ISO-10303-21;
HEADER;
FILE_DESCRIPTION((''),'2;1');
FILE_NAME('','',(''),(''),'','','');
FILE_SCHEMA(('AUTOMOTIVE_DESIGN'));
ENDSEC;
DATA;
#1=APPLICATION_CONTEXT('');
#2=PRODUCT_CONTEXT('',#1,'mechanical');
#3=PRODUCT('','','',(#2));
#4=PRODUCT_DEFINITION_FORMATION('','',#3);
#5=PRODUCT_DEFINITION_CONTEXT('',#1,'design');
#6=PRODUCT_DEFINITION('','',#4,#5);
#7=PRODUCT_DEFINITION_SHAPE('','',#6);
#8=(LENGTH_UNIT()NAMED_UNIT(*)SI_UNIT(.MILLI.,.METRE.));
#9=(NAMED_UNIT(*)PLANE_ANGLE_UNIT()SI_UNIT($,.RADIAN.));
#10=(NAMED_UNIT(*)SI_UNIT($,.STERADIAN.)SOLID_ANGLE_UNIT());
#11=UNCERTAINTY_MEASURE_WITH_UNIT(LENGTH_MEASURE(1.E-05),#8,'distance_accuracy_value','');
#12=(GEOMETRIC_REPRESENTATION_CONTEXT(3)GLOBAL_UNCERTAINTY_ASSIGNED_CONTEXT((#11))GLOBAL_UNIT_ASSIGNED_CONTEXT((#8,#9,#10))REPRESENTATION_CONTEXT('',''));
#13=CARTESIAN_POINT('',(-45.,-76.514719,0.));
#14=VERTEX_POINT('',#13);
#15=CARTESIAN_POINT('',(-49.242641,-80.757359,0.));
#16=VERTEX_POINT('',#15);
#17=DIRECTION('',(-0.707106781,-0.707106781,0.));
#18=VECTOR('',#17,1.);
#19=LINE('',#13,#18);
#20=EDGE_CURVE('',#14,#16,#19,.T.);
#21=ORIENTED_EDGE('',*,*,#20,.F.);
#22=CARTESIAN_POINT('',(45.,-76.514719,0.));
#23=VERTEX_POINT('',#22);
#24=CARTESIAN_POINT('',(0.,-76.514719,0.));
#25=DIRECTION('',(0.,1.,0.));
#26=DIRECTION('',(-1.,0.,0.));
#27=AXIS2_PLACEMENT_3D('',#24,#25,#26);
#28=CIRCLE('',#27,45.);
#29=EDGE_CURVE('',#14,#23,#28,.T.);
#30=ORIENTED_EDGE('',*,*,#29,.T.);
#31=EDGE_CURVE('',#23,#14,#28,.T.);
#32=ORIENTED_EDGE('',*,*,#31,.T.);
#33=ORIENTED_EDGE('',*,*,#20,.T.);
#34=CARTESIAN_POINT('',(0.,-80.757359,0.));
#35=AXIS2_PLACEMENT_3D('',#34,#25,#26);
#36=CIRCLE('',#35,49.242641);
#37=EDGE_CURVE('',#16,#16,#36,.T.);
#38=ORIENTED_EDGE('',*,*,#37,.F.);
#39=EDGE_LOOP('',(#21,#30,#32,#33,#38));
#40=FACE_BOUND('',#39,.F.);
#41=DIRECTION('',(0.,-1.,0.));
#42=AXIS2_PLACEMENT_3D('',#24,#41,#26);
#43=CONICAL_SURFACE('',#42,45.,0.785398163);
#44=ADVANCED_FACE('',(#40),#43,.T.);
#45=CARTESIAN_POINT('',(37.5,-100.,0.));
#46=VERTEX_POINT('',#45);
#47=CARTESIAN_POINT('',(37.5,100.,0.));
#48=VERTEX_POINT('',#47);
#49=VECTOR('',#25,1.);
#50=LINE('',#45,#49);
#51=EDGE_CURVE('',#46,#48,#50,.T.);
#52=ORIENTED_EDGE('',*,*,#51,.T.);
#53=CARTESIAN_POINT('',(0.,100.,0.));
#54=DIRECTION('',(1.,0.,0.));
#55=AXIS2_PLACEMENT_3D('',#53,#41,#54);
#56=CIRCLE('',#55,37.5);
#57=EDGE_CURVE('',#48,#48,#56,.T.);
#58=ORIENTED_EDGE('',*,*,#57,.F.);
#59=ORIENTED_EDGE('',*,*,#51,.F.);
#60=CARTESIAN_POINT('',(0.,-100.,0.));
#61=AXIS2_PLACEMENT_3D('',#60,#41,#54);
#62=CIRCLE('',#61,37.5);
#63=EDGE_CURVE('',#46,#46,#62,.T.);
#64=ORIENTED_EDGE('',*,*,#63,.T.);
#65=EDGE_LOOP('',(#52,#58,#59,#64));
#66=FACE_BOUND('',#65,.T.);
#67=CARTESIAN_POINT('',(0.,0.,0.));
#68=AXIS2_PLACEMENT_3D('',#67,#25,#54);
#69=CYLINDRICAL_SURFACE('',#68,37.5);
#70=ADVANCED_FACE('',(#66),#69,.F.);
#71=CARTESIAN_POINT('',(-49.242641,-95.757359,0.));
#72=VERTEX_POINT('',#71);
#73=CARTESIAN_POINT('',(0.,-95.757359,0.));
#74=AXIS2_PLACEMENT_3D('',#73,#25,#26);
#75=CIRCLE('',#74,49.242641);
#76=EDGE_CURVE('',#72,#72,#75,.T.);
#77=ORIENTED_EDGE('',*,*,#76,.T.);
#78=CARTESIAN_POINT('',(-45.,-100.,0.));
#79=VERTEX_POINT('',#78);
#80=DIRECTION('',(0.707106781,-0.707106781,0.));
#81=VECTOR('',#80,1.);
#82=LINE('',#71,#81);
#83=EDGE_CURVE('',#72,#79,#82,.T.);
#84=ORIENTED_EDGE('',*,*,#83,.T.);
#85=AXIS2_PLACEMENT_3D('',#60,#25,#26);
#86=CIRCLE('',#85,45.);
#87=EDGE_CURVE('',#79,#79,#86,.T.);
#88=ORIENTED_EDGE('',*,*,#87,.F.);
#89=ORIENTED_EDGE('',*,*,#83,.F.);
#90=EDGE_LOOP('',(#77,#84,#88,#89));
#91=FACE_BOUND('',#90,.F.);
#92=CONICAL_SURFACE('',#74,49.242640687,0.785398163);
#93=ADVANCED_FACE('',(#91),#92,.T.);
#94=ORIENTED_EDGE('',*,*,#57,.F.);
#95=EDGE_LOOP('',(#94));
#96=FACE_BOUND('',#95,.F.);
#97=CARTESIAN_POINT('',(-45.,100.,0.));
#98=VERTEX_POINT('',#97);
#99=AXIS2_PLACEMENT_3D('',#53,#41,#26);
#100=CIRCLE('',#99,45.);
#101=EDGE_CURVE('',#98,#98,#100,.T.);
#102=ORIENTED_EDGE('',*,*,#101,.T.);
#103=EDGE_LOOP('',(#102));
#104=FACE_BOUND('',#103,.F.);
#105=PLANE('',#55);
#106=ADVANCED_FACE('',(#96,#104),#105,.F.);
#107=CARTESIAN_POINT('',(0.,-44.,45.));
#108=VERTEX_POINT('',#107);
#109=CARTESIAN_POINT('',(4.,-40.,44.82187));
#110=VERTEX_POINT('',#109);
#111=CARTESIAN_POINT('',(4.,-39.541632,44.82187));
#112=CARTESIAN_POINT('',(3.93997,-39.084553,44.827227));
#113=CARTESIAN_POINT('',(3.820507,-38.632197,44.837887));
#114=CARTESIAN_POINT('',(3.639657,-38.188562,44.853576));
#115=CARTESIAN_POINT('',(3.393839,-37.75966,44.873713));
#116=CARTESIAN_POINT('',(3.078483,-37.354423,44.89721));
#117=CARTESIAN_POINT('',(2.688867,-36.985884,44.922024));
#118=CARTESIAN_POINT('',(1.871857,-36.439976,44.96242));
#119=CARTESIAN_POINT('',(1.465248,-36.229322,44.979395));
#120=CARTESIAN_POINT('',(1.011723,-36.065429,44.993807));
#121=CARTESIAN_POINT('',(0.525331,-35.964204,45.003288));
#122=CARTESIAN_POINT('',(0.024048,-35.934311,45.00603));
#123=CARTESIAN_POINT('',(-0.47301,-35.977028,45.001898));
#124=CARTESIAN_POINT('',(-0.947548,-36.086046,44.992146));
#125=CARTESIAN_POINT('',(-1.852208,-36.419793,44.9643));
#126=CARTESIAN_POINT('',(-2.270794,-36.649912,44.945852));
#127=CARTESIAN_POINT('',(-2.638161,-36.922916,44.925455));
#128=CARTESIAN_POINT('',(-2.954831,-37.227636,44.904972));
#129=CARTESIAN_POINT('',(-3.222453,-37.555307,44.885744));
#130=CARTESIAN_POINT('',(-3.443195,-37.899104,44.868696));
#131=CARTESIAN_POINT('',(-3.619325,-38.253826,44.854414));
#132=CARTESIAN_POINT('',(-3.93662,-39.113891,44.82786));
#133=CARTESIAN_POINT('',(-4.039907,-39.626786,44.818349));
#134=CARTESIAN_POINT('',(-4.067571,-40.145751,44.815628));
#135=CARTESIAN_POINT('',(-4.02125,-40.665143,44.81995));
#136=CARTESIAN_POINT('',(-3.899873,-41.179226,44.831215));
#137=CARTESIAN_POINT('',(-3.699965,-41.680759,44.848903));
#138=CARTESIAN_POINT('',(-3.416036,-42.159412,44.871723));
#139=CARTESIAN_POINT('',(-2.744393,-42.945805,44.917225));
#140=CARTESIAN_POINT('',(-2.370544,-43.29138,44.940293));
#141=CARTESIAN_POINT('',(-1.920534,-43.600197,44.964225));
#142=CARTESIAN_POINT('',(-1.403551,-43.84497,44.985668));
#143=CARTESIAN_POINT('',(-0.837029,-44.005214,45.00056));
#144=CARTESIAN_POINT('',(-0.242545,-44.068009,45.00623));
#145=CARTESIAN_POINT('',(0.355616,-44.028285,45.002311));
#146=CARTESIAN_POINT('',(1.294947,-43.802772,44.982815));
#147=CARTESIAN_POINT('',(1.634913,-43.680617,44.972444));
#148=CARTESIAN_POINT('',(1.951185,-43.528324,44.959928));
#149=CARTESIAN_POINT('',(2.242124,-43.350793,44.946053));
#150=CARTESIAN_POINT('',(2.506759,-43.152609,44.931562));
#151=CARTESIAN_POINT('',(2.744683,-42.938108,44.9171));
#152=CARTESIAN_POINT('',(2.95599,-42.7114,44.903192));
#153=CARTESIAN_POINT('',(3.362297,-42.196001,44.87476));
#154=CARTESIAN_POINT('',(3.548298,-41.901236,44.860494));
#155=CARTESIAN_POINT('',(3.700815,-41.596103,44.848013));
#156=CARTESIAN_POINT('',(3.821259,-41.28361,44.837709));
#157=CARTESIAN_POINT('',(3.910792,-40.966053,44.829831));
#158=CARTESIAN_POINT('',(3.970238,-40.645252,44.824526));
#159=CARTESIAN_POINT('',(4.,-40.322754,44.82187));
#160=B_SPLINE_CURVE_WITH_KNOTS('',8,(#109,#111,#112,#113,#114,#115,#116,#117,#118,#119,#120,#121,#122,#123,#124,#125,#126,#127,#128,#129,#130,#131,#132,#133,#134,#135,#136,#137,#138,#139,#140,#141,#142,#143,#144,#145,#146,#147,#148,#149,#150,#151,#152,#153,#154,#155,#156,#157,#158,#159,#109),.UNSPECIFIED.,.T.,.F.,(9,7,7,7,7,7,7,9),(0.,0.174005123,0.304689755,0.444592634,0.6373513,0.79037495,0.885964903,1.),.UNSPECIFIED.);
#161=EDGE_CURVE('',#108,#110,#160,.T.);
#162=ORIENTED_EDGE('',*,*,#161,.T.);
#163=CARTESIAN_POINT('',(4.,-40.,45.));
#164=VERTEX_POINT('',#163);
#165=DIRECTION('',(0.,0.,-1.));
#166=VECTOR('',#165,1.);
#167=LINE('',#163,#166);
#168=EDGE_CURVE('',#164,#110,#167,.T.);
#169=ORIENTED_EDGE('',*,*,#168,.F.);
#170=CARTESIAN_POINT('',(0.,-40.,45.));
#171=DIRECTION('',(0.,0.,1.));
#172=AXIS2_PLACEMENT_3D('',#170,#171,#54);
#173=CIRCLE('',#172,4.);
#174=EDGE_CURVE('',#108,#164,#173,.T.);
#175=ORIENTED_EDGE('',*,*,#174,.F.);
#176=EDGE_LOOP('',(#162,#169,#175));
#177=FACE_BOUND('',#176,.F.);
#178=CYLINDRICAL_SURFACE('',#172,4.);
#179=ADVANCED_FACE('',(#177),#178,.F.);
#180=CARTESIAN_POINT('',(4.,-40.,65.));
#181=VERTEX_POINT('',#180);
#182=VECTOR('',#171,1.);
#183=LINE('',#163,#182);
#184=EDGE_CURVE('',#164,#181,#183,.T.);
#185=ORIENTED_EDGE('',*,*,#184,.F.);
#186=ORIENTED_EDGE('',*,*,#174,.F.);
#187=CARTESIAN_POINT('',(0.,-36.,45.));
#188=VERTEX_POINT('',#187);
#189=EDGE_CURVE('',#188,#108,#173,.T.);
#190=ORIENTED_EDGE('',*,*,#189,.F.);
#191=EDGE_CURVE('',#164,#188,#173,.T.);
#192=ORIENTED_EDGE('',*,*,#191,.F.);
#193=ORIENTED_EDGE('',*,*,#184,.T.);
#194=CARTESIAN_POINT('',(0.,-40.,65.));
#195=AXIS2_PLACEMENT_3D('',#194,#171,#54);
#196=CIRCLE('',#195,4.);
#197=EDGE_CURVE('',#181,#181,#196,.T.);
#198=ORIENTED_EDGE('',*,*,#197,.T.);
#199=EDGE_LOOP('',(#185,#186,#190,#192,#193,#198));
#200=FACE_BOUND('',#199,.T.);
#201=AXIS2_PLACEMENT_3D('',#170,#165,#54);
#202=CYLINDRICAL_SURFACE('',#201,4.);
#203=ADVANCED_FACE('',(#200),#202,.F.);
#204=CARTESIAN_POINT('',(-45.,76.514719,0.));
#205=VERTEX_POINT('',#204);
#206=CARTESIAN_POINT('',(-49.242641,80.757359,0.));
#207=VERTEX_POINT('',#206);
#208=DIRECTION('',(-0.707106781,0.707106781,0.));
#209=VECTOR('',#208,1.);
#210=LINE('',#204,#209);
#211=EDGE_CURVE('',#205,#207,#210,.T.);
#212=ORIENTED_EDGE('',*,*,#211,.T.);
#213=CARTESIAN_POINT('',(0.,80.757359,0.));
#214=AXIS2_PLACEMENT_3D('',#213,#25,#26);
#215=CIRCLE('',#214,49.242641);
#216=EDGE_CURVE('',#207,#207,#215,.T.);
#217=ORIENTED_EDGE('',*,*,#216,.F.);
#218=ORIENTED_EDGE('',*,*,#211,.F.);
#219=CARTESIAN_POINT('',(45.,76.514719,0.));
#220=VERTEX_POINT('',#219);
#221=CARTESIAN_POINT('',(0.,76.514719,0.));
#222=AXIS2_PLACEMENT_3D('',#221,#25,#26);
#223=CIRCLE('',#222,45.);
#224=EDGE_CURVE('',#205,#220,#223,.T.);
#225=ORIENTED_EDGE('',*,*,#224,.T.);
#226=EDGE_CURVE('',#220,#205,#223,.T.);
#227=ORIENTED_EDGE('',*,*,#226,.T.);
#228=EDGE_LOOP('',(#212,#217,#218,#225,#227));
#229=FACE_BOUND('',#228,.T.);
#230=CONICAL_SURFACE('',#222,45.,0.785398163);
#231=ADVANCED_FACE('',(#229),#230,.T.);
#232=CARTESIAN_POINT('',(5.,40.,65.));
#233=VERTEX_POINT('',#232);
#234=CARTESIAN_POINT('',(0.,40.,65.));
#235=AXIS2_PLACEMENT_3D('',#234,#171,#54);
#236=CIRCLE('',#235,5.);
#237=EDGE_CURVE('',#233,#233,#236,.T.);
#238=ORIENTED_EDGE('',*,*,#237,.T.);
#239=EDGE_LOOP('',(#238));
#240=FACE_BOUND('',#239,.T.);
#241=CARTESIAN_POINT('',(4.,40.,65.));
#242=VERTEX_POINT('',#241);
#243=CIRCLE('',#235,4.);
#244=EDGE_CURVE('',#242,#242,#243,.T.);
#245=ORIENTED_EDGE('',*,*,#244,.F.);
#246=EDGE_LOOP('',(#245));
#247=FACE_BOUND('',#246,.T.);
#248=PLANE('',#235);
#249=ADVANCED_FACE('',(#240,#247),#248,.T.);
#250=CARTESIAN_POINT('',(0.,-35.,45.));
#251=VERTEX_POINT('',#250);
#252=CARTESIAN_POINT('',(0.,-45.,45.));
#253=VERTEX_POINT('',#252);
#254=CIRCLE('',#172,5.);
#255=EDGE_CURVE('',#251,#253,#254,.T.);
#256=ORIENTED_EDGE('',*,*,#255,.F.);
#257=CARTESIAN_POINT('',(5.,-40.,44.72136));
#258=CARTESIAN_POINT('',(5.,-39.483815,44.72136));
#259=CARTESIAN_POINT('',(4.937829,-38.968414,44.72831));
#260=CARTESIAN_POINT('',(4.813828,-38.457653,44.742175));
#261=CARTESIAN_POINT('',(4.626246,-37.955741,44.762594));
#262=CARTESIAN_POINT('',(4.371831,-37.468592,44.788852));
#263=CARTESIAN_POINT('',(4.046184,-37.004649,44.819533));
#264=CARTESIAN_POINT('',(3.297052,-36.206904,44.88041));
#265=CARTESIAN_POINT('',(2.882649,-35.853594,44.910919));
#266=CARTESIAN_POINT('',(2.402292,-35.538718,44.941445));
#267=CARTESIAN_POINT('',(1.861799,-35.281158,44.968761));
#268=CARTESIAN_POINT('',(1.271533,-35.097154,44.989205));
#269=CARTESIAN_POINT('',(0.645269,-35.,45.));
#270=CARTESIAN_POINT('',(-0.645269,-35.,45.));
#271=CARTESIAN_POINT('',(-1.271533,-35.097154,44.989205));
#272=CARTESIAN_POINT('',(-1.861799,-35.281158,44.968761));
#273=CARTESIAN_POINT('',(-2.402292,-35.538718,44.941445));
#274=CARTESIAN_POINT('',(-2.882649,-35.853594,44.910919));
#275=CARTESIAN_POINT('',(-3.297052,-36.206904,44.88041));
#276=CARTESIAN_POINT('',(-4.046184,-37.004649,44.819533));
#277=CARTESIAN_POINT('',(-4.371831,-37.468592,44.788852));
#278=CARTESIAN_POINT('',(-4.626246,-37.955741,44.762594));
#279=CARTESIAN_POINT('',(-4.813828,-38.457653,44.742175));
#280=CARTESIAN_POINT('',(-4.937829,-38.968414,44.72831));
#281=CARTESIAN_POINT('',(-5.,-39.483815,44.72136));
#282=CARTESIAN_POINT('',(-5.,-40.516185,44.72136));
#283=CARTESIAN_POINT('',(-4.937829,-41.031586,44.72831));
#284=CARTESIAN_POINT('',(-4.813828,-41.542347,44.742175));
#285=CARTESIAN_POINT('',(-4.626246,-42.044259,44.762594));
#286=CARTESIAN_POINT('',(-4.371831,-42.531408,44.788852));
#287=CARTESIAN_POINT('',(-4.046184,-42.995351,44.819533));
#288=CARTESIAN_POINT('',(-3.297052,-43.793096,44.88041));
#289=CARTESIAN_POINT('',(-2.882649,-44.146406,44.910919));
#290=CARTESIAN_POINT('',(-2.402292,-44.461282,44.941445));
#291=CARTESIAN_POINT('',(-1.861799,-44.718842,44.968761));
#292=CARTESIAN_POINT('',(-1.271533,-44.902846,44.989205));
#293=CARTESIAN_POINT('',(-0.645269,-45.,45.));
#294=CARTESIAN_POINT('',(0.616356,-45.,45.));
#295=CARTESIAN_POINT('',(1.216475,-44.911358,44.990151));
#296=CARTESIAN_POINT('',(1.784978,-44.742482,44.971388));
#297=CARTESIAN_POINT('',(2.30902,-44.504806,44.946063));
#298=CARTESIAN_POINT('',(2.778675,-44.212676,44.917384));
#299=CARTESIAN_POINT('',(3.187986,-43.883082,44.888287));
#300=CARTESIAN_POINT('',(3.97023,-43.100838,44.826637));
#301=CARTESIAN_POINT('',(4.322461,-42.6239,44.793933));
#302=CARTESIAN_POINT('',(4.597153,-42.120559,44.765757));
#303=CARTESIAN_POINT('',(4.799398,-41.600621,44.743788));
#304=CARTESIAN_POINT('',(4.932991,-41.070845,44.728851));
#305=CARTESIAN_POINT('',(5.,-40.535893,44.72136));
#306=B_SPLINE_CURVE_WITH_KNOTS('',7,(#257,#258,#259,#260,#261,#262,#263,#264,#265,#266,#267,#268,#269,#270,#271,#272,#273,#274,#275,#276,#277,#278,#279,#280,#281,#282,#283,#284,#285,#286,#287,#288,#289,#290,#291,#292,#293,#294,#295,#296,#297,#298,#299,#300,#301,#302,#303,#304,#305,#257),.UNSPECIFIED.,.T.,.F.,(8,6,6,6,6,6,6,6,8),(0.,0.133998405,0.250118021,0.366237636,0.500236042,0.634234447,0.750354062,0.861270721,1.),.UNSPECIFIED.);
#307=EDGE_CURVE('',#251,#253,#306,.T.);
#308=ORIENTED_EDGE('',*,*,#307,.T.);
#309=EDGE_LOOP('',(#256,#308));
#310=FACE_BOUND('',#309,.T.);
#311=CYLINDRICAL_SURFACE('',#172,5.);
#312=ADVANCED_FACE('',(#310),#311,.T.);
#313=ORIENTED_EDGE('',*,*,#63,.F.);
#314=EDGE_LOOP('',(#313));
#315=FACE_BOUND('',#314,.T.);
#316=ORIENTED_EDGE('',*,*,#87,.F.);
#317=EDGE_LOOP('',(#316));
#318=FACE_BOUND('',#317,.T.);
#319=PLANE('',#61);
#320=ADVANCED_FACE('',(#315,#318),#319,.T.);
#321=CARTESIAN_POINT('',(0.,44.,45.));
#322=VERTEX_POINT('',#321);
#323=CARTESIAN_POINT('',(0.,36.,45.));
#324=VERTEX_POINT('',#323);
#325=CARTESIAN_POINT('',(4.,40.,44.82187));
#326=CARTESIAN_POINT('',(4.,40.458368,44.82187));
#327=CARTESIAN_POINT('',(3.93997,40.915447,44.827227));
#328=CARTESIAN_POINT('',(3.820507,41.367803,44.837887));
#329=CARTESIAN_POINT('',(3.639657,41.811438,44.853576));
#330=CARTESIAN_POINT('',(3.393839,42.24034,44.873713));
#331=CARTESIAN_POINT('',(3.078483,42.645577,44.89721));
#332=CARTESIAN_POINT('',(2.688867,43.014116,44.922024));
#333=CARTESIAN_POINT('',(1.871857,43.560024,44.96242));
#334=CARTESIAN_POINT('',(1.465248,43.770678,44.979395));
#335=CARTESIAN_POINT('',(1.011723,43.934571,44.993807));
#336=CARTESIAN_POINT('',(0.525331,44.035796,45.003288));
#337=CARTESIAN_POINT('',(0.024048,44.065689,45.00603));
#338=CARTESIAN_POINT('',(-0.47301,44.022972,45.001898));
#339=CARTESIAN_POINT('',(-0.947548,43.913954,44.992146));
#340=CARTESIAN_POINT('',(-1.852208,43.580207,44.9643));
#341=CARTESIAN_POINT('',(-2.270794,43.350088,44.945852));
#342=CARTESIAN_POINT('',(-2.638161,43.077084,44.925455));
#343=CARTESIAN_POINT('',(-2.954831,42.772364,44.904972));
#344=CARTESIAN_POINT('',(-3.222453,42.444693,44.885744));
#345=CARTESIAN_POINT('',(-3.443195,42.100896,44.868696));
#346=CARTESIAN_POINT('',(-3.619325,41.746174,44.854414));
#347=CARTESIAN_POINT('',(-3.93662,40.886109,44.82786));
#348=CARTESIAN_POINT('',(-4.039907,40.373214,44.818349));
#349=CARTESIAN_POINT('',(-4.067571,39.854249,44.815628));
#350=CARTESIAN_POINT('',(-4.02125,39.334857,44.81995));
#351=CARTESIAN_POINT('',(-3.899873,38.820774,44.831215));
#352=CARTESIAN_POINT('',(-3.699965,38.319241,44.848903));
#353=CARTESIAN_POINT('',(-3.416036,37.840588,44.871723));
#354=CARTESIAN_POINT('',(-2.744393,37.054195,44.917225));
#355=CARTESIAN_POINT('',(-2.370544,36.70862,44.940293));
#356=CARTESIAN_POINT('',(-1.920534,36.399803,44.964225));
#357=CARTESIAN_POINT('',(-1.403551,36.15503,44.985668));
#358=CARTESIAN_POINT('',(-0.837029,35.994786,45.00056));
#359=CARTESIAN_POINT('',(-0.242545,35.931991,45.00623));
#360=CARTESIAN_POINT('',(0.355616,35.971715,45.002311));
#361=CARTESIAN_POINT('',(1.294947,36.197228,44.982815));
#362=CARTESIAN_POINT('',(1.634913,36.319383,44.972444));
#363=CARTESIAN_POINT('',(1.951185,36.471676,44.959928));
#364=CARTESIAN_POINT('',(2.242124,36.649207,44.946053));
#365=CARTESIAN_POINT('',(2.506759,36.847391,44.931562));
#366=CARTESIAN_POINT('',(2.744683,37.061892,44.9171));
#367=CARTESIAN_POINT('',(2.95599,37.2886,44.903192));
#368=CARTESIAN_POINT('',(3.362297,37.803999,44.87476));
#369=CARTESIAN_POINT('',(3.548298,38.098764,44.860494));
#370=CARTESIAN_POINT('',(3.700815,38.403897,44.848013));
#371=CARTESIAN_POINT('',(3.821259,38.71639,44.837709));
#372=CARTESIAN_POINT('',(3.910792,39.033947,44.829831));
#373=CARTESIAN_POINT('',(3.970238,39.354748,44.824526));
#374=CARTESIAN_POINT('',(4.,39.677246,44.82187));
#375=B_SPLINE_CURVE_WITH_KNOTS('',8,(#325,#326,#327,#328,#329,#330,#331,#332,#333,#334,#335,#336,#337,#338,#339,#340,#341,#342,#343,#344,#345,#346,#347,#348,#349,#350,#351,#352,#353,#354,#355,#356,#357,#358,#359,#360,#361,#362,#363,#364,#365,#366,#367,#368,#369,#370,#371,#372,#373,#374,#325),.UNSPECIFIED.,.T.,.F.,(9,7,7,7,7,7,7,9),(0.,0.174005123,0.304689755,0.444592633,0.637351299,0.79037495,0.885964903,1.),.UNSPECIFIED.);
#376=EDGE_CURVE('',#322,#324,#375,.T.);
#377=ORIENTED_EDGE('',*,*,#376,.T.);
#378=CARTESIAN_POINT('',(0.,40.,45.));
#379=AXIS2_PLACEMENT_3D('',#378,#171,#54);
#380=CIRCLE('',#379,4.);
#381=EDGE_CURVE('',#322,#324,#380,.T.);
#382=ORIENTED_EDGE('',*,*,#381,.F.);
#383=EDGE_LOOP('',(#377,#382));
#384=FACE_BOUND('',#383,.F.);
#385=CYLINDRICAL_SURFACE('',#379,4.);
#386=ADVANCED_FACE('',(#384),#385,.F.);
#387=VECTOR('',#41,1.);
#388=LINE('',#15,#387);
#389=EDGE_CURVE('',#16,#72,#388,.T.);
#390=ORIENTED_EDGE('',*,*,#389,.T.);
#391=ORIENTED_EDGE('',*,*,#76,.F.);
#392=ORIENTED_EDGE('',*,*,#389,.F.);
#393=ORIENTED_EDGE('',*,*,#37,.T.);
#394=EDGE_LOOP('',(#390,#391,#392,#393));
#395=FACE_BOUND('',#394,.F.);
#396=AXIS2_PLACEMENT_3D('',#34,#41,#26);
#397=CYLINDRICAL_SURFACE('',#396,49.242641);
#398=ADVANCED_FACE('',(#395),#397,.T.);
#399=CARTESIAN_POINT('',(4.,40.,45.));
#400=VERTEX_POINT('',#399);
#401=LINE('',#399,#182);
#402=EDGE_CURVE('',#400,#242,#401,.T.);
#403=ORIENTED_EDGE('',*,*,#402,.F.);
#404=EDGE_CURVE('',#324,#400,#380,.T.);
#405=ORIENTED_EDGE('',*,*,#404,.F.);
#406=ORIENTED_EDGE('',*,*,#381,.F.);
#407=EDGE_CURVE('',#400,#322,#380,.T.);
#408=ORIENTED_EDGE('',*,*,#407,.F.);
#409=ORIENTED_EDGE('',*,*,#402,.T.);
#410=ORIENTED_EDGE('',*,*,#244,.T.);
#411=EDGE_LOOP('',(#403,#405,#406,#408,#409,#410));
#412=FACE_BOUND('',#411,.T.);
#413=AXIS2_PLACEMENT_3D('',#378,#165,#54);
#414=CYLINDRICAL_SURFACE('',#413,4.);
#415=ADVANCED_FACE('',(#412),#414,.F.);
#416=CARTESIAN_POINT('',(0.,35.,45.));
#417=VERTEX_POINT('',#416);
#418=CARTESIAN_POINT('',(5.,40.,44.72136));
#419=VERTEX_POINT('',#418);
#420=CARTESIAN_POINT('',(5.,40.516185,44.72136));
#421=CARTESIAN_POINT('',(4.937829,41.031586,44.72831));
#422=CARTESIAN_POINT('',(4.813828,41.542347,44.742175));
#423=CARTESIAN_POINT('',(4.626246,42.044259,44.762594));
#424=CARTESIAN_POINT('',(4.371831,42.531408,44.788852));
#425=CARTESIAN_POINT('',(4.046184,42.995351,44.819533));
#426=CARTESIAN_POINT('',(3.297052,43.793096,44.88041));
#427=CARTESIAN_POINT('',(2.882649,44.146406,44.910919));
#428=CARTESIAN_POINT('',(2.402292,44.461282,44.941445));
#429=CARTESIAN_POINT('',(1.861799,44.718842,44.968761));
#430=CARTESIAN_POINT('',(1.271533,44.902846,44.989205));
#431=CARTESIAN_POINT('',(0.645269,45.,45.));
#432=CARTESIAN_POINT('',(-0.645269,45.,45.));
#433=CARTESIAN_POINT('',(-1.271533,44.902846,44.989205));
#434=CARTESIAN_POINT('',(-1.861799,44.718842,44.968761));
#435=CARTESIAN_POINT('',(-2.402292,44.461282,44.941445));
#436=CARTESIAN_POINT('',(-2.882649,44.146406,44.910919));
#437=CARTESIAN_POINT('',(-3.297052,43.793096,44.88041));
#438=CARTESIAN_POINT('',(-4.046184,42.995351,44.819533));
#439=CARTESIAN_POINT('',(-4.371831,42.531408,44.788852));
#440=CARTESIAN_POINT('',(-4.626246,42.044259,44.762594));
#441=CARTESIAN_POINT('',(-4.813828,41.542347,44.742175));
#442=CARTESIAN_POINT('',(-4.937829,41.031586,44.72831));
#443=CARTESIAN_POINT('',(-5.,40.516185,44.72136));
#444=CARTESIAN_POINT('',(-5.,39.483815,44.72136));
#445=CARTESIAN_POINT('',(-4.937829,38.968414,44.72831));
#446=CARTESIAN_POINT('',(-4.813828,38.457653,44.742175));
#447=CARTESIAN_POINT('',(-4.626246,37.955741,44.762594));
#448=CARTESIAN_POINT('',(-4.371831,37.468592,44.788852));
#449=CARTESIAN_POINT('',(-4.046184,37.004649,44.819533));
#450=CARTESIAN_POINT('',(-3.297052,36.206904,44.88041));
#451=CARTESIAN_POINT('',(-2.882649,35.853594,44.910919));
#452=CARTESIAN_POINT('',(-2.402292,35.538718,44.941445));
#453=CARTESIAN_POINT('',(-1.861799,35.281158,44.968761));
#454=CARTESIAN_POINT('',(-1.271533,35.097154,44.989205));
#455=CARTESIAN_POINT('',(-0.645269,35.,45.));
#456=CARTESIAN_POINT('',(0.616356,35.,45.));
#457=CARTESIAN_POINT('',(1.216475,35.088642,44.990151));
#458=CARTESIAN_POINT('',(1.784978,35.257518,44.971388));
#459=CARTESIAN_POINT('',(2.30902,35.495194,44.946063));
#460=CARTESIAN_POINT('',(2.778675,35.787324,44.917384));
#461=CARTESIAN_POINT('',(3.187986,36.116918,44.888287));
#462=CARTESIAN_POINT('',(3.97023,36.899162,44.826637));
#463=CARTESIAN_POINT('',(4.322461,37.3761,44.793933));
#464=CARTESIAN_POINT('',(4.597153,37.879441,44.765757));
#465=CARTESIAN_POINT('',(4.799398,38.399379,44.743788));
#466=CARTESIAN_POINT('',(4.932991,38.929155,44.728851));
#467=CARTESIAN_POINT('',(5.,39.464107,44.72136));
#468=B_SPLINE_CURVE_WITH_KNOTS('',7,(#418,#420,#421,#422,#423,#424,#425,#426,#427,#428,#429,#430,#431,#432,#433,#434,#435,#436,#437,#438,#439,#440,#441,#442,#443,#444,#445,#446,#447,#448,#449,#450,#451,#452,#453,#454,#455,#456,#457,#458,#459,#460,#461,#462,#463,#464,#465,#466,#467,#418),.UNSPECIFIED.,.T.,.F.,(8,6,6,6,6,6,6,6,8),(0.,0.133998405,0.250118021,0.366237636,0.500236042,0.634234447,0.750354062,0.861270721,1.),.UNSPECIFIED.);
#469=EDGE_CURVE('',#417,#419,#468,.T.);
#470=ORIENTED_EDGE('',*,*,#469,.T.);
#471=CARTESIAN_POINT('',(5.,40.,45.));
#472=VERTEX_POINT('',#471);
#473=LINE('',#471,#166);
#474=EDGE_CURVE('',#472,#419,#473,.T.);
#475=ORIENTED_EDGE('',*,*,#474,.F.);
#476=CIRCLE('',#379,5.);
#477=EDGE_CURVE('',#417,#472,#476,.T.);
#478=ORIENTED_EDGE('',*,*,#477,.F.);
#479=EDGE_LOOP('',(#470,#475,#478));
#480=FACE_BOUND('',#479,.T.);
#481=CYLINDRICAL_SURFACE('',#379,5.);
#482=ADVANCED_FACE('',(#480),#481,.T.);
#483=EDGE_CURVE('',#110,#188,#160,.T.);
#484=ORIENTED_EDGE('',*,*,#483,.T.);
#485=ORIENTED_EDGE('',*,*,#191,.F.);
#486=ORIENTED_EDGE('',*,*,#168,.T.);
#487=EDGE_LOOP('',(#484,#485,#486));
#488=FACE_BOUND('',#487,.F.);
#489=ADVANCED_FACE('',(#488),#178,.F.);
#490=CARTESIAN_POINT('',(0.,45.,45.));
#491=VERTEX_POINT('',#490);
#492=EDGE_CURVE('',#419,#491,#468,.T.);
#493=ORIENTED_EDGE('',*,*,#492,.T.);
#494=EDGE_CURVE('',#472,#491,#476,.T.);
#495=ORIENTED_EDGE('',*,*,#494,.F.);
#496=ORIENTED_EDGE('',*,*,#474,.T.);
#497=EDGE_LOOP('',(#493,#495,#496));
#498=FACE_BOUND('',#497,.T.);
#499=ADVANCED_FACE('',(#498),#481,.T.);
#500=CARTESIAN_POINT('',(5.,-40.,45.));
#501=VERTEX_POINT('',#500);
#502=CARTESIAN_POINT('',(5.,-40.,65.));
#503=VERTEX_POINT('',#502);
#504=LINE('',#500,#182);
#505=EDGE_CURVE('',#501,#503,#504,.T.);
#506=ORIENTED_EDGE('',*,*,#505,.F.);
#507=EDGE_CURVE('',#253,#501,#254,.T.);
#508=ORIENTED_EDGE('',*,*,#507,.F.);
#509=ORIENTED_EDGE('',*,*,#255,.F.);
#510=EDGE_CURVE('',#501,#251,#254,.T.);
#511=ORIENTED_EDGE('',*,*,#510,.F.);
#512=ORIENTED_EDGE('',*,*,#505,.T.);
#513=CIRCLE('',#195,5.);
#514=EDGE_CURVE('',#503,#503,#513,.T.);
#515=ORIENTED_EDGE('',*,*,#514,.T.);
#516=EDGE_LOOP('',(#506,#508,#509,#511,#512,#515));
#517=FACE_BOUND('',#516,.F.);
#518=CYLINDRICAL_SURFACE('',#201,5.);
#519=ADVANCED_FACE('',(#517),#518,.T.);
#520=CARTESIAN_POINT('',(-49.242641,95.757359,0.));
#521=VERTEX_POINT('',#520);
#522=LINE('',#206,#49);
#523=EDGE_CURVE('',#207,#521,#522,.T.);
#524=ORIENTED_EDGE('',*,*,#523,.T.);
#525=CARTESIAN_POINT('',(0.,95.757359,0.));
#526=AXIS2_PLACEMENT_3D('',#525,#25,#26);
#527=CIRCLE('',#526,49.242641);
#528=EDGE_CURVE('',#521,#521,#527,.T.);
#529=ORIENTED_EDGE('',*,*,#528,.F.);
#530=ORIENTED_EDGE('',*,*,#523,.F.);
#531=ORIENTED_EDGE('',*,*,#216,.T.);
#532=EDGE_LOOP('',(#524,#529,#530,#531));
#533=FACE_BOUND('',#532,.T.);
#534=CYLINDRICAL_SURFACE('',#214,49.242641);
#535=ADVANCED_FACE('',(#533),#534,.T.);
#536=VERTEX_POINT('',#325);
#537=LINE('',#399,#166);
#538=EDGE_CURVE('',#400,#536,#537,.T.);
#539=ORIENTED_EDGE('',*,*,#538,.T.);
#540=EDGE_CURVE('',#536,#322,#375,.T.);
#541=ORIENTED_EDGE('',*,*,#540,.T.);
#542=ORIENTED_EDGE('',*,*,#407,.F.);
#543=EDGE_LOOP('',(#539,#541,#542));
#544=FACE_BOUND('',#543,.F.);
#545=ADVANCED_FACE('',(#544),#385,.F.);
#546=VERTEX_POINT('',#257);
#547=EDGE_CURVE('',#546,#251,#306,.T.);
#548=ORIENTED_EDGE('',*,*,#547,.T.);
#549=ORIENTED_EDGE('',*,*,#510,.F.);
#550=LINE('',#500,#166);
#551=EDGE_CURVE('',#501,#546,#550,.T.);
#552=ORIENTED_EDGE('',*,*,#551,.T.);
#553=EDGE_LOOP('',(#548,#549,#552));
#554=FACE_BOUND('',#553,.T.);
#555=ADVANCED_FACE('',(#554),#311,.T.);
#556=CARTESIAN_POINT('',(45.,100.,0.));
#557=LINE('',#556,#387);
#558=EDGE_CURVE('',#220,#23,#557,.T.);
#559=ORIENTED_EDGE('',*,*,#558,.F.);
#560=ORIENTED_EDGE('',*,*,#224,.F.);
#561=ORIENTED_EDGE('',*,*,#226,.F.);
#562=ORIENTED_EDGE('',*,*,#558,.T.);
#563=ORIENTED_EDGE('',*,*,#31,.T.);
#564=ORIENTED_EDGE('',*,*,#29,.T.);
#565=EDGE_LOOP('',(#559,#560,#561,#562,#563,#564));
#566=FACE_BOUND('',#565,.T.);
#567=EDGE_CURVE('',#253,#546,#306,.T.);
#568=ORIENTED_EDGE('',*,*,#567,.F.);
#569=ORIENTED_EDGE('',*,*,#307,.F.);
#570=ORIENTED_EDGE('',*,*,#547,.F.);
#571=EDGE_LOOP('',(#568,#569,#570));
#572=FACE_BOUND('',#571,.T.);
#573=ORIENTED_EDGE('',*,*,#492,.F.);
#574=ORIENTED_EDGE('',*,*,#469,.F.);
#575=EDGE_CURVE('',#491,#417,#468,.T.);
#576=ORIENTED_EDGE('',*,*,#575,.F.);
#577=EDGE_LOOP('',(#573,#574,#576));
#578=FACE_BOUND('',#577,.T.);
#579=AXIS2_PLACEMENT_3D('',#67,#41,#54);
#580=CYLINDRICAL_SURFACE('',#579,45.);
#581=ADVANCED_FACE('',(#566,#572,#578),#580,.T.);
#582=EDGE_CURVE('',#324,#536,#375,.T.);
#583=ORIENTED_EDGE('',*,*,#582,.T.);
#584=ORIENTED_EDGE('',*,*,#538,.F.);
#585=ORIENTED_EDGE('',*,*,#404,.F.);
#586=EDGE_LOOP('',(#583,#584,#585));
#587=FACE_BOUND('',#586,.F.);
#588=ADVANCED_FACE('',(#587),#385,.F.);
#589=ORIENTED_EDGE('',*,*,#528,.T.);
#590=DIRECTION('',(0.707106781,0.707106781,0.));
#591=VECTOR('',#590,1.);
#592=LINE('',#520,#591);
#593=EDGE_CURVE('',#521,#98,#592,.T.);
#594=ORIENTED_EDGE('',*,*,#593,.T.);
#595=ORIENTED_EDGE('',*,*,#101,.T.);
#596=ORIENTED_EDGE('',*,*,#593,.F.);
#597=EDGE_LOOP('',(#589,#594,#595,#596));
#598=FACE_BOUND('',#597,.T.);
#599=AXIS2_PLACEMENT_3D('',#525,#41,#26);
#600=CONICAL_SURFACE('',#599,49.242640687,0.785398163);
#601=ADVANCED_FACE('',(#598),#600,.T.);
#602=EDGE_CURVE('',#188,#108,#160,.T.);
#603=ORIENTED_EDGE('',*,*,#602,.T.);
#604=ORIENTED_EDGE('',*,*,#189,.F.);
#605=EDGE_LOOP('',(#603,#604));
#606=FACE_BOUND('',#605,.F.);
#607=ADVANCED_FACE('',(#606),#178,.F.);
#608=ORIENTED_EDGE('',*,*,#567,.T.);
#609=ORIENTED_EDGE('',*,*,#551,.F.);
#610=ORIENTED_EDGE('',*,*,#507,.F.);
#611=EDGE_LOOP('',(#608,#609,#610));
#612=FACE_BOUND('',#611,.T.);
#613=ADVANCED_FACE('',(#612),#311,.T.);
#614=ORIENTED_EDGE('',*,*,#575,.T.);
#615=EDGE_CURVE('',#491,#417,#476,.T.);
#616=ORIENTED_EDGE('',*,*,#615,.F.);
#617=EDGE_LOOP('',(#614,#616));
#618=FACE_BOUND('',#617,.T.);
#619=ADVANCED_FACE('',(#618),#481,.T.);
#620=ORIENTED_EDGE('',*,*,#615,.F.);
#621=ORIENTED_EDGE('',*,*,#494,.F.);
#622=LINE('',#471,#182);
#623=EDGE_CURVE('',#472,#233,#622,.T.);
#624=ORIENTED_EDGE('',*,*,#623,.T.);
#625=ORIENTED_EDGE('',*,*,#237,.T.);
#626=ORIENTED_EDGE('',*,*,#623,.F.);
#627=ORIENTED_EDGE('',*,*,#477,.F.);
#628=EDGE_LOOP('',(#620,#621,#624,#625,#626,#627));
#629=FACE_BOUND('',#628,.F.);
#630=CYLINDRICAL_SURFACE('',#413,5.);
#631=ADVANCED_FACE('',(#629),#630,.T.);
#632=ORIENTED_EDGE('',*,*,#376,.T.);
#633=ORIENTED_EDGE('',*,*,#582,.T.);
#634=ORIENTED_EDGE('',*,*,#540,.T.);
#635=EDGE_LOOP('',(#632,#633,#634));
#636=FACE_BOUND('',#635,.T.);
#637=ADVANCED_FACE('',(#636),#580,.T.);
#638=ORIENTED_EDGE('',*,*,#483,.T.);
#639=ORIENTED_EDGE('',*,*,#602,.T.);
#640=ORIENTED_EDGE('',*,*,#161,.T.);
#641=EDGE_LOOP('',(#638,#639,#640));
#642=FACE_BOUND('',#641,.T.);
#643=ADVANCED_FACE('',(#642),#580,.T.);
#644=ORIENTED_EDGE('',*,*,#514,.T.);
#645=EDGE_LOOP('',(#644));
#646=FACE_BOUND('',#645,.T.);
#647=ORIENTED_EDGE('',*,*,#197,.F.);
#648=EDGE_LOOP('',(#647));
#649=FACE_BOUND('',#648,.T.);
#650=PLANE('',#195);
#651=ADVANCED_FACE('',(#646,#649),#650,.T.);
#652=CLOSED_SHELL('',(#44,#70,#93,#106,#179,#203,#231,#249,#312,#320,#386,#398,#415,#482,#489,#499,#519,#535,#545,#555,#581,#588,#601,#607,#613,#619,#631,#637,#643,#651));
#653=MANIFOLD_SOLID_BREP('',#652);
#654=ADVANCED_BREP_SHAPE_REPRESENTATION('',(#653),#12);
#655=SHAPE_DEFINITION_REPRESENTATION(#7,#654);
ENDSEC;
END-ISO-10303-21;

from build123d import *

# Parameters (mm, degrees)
F0_R          = 45
F0_R_2        = 37.5
F1_DEPTH      = 100
F3_R          = 5
F3_R_2        = 4
F4_DEPTH      = 20
F4_DEPTH_BACK = 5


# Not quite as in the source:
# - a pattern or mirror of a feature is missing from the dataset's text; its kind, count and spacing are read off the source's solid


with BuildPart() as f1:
    # F0 (on Front) → F1 (new body, symmetric)
    with BuildSketch(Plane.XZ):
        Circle(F0_R)
        Circle(F0_R_2, mode=Mode.SUBTRACT)
    extrude(amount=F1_DEPTH, both=True)

    # F3 (on offset) → F4 (join, two sides)
    with BuildSketch(Plane.XY.offset(45)) as f4_sk:
        with Locations((0, 40)):
            Circle(F3_R)
        with Locations((0, 40)):
            Circle(F3_R_2, mode=Mode.SUBTRACT)
        with Locations((0, -40)):
            Circle(F3_R)
        with Locations((0, -40)):
            Circle(F3_R_2, mode=Mode.SUBTRACT)
    extrude(amount=F4_DEPTH)
    extrude(f4_sk.sketch, amount=-F4_DEPTH_BACK)

    # F5 (on Top) → F6 (revolve)
    with BuildSketch(Plane.XY):
        Polygon((-49.2426406871, -95.7573593129), (-45, -100), (-45, -76.5147186258), (-49.2426406871, -80.7573593129), align=None)
    f6 = revolve(axis=Axis((0, 11.0722705722, 0), (0, 1, 0)))

    # F6_copies: F6 across plane
    add(f6.mirror(Plane.ZX))


solid = f1.part
